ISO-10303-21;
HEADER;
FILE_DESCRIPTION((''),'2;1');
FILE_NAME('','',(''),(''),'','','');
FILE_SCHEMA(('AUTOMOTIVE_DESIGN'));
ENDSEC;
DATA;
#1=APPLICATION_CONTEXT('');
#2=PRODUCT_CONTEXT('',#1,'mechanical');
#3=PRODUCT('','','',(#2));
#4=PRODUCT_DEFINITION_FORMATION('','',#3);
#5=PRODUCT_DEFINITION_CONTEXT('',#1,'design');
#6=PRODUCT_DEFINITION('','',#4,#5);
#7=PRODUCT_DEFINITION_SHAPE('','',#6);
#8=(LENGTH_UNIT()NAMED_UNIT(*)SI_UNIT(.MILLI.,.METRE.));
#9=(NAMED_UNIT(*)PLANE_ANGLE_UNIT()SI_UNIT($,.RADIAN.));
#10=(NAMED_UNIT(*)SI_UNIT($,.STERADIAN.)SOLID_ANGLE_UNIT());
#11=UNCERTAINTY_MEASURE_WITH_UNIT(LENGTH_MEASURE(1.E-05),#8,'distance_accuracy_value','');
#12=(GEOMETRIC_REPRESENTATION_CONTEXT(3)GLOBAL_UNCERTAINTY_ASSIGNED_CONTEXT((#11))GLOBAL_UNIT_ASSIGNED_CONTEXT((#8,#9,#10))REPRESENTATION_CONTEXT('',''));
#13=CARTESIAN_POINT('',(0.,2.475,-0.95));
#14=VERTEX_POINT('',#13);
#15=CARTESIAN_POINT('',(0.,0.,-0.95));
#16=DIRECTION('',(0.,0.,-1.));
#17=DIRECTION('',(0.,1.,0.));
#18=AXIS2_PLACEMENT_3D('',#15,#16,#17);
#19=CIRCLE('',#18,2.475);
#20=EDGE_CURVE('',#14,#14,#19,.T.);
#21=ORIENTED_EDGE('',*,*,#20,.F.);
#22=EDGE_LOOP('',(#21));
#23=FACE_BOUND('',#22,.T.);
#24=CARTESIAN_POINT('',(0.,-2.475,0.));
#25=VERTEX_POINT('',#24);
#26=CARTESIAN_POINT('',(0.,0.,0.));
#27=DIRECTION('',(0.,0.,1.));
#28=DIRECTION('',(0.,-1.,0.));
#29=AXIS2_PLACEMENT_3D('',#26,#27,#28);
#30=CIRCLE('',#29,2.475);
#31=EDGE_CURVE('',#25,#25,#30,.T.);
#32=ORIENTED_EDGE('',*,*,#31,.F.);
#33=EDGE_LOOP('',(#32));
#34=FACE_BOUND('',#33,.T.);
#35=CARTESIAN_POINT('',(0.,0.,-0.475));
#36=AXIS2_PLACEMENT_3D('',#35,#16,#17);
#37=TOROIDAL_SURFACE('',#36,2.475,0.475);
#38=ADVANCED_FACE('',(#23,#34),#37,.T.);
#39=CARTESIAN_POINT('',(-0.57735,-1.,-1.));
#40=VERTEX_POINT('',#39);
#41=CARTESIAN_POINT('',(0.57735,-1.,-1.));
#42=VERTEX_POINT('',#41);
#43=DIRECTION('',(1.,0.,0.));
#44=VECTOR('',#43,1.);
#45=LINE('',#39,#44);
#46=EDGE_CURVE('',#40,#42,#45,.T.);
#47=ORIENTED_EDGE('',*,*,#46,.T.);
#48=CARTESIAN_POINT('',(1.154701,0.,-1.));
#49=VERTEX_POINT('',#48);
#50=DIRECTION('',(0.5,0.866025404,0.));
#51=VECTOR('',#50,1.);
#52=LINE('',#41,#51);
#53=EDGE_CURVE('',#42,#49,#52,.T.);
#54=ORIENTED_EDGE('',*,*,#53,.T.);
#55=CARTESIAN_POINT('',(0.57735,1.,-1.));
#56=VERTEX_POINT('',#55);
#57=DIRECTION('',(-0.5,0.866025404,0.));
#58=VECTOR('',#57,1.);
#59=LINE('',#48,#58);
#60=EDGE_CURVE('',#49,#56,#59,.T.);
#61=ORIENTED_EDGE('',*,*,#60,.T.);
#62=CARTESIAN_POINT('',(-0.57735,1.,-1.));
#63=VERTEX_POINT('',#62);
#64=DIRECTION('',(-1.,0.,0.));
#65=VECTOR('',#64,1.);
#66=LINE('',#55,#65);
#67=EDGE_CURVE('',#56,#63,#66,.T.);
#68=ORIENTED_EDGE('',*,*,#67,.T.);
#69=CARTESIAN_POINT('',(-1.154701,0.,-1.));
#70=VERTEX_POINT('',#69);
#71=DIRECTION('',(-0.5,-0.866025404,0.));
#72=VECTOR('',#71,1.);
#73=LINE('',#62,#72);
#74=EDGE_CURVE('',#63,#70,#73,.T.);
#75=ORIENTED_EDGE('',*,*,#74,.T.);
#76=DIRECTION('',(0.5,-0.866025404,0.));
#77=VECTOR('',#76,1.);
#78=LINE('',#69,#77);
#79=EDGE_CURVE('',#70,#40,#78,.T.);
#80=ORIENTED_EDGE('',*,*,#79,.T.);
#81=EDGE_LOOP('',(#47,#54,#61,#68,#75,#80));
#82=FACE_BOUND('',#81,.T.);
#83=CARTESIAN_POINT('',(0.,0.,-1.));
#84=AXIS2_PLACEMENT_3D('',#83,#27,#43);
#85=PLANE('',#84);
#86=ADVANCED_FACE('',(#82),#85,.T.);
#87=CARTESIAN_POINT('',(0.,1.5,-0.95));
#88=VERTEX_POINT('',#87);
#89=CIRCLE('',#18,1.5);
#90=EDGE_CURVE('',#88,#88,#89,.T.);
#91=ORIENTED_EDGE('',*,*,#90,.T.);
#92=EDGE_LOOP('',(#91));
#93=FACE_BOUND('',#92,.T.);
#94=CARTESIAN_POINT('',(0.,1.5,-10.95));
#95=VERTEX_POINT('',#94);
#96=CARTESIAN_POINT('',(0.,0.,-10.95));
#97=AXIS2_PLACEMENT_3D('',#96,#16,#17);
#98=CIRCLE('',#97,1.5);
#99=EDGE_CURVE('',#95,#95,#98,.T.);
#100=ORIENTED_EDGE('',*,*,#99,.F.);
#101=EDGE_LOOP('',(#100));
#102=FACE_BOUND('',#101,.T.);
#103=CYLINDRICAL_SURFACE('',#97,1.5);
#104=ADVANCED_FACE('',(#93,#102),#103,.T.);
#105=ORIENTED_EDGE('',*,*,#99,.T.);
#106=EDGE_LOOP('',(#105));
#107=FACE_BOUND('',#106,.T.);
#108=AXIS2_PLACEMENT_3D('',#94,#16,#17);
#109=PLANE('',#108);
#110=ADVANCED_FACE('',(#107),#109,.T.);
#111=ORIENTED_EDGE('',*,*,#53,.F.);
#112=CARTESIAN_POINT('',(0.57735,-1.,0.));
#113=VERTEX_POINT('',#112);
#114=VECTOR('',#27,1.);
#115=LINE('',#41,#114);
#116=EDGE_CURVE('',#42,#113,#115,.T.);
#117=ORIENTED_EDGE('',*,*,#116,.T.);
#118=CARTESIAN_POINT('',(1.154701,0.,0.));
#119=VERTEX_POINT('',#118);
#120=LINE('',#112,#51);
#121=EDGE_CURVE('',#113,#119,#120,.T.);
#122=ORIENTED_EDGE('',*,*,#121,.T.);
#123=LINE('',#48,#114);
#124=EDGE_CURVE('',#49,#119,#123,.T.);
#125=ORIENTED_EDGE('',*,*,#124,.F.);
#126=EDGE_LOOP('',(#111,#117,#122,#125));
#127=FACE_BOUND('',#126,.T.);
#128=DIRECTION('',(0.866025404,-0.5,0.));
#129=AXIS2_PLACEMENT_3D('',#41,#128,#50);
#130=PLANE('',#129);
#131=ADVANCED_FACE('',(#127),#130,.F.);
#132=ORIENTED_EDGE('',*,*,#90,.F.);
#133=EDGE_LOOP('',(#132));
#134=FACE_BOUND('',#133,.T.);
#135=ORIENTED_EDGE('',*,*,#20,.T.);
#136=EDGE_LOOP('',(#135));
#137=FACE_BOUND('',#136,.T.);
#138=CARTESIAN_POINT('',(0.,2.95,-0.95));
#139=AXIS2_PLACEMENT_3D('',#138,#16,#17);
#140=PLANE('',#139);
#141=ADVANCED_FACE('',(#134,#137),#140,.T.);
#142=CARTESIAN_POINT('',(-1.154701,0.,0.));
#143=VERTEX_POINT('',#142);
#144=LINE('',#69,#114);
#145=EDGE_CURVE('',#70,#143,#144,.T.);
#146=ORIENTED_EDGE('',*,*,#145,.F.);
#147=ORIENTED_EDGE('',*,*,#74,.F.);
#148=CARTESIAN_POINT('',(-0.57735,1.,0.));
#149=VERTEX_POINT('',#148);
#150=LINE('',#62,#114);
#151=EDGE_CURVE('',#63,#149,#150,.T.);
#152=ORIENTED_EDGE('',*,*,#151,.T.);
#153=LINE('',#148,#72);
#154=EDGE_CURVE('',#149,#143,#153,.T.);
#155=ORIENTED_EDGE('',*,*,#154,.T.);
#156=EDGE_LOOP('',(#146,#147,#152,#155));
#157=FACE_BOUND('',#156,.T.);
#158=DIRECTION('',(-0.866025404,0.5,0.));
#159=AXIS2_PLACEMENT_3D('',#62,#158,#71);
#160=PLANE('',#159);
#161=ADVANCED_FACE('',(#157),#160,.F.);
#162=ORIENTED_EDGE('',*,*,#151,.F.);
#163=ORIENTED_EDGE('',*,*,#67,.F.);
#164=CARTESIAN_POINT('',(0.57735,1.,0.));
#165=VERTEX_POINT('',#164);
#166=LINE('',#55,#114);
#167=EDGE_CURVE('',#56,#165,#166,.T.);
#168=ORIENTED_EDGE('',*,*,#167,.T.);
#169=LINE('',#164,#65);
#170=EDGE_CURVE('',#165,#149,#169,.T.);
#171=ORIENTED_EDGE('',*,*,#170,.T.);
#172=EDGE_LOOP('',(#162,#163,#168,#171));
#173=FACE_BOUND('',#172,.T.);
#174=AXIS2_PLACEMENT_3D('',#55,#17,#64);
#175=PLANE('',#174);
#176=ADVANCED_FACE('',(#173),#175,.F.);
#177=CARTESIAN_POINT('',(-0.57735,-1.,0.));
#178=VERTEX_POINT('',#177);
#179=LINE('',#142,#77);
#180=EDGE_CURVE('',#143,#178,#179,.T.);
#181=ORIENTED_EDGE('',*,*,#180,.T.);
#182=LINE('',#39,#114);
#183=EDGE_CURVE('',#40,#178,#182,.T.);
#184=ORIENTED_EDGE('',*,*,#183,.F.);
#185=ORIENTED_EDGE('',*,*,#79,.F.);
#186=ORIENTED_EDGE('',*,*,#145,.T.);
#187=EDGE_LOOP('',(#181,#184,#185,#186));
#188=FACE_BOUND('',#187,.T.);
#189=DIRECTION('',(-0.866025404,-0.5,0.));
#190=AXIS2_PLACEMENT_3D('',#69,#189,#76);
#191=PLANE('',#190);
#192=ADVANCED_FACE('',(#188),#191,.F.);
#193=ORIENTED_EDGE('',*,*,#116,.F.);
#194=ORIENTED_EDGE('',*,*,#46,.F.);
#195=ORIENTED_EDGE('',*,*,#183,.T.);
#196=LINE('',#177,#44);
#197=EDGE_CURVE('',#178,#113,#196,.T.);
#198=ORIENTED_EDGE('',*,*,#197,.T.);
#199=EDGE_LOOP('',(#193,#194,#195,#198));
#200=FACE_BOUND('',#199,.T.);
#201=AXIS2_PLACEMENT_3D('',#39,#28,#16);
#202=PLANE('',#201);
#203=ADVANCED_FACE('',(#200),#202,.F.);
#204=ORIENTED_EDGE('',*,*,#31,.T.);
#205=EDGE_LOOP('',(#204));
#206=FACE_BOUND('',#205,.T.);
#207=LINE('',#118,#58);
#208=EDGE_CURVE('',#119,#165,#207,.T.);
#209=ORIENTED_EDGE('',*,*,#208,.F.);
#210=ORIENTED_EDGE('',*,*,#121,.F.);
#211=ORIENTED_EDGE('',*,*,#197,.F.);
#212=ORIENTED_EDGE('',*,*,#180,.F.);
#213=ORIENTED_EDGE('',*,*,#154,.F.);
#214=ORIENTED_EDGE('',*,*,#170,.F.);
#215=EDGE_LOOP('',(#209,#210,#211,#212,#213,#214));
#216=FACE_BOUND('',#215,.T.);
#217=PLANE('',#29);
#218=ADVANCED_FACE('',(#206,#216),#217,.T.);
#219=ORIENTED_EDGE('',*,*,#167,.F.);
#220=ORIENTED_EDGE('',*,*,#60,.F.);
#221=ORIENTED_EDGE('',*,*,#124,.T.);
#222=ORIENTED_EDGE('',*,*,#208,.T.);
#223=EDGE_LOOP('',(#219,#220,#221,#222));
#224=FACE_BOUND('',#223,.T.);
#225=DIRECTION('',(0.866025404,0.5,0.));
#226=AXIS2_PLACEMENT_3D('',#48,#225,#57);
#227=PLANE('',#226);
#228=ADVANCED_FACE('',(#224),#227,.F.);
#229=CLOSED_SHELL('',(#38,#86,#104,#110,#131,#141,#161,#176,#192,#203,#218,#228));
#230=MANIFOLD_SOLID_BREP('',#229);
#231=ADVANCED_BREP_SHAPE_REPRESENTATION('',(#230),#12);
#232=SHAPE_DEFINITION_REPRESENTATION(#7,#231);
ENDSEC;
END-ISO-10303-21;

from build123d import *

# Parameters (mm, degrees)
FILLET_1_R          = 0.475
CUT_EXTRUDE_1_DEPTH = 1


with BuildPart() as part:
    # 草图1 → 旋转1 (revolve)
    with BuildSketch(Plane(origin=(0, 0, 0), x_dir=(0, 0, -1), z_dir=(1, 0, 0))):
        Polygon((0, 0), (0, 2.95), (0.95, 2.95), (0.95, 1.5), (10.95, 1.5), (10.95, 0), align=None)
    revolve(axis=Axis((0, 0, -10.95), (0, 0, 1)))

    # 圆角1
    fillet_1_edges = [part.edges().sort_by_distance(p)[0] for p in [
        (0, -2.95, -0.95),
        (0, -2.95, 0),
    ]]
    fillet(fillet_1_edges, radius=FILLET_1_R - 0.0001)  # a hair under: the kernel refuses the full size

    # 草图2 → 切除-拉伸1 (cut)
    with BuildSketch(Plane.XY):
        Polygon((0.577350269, 1), (-0.577350269, 1), (-1.154700538, 0), (-0.577350269, -1), (0.577350269, -1), (1.154700538, 0), align=None)
    extrude(amount=-CUT_EXTRUDE_1_DEPTH, mode=Mode.SUBTRACT)


solid = part.part
